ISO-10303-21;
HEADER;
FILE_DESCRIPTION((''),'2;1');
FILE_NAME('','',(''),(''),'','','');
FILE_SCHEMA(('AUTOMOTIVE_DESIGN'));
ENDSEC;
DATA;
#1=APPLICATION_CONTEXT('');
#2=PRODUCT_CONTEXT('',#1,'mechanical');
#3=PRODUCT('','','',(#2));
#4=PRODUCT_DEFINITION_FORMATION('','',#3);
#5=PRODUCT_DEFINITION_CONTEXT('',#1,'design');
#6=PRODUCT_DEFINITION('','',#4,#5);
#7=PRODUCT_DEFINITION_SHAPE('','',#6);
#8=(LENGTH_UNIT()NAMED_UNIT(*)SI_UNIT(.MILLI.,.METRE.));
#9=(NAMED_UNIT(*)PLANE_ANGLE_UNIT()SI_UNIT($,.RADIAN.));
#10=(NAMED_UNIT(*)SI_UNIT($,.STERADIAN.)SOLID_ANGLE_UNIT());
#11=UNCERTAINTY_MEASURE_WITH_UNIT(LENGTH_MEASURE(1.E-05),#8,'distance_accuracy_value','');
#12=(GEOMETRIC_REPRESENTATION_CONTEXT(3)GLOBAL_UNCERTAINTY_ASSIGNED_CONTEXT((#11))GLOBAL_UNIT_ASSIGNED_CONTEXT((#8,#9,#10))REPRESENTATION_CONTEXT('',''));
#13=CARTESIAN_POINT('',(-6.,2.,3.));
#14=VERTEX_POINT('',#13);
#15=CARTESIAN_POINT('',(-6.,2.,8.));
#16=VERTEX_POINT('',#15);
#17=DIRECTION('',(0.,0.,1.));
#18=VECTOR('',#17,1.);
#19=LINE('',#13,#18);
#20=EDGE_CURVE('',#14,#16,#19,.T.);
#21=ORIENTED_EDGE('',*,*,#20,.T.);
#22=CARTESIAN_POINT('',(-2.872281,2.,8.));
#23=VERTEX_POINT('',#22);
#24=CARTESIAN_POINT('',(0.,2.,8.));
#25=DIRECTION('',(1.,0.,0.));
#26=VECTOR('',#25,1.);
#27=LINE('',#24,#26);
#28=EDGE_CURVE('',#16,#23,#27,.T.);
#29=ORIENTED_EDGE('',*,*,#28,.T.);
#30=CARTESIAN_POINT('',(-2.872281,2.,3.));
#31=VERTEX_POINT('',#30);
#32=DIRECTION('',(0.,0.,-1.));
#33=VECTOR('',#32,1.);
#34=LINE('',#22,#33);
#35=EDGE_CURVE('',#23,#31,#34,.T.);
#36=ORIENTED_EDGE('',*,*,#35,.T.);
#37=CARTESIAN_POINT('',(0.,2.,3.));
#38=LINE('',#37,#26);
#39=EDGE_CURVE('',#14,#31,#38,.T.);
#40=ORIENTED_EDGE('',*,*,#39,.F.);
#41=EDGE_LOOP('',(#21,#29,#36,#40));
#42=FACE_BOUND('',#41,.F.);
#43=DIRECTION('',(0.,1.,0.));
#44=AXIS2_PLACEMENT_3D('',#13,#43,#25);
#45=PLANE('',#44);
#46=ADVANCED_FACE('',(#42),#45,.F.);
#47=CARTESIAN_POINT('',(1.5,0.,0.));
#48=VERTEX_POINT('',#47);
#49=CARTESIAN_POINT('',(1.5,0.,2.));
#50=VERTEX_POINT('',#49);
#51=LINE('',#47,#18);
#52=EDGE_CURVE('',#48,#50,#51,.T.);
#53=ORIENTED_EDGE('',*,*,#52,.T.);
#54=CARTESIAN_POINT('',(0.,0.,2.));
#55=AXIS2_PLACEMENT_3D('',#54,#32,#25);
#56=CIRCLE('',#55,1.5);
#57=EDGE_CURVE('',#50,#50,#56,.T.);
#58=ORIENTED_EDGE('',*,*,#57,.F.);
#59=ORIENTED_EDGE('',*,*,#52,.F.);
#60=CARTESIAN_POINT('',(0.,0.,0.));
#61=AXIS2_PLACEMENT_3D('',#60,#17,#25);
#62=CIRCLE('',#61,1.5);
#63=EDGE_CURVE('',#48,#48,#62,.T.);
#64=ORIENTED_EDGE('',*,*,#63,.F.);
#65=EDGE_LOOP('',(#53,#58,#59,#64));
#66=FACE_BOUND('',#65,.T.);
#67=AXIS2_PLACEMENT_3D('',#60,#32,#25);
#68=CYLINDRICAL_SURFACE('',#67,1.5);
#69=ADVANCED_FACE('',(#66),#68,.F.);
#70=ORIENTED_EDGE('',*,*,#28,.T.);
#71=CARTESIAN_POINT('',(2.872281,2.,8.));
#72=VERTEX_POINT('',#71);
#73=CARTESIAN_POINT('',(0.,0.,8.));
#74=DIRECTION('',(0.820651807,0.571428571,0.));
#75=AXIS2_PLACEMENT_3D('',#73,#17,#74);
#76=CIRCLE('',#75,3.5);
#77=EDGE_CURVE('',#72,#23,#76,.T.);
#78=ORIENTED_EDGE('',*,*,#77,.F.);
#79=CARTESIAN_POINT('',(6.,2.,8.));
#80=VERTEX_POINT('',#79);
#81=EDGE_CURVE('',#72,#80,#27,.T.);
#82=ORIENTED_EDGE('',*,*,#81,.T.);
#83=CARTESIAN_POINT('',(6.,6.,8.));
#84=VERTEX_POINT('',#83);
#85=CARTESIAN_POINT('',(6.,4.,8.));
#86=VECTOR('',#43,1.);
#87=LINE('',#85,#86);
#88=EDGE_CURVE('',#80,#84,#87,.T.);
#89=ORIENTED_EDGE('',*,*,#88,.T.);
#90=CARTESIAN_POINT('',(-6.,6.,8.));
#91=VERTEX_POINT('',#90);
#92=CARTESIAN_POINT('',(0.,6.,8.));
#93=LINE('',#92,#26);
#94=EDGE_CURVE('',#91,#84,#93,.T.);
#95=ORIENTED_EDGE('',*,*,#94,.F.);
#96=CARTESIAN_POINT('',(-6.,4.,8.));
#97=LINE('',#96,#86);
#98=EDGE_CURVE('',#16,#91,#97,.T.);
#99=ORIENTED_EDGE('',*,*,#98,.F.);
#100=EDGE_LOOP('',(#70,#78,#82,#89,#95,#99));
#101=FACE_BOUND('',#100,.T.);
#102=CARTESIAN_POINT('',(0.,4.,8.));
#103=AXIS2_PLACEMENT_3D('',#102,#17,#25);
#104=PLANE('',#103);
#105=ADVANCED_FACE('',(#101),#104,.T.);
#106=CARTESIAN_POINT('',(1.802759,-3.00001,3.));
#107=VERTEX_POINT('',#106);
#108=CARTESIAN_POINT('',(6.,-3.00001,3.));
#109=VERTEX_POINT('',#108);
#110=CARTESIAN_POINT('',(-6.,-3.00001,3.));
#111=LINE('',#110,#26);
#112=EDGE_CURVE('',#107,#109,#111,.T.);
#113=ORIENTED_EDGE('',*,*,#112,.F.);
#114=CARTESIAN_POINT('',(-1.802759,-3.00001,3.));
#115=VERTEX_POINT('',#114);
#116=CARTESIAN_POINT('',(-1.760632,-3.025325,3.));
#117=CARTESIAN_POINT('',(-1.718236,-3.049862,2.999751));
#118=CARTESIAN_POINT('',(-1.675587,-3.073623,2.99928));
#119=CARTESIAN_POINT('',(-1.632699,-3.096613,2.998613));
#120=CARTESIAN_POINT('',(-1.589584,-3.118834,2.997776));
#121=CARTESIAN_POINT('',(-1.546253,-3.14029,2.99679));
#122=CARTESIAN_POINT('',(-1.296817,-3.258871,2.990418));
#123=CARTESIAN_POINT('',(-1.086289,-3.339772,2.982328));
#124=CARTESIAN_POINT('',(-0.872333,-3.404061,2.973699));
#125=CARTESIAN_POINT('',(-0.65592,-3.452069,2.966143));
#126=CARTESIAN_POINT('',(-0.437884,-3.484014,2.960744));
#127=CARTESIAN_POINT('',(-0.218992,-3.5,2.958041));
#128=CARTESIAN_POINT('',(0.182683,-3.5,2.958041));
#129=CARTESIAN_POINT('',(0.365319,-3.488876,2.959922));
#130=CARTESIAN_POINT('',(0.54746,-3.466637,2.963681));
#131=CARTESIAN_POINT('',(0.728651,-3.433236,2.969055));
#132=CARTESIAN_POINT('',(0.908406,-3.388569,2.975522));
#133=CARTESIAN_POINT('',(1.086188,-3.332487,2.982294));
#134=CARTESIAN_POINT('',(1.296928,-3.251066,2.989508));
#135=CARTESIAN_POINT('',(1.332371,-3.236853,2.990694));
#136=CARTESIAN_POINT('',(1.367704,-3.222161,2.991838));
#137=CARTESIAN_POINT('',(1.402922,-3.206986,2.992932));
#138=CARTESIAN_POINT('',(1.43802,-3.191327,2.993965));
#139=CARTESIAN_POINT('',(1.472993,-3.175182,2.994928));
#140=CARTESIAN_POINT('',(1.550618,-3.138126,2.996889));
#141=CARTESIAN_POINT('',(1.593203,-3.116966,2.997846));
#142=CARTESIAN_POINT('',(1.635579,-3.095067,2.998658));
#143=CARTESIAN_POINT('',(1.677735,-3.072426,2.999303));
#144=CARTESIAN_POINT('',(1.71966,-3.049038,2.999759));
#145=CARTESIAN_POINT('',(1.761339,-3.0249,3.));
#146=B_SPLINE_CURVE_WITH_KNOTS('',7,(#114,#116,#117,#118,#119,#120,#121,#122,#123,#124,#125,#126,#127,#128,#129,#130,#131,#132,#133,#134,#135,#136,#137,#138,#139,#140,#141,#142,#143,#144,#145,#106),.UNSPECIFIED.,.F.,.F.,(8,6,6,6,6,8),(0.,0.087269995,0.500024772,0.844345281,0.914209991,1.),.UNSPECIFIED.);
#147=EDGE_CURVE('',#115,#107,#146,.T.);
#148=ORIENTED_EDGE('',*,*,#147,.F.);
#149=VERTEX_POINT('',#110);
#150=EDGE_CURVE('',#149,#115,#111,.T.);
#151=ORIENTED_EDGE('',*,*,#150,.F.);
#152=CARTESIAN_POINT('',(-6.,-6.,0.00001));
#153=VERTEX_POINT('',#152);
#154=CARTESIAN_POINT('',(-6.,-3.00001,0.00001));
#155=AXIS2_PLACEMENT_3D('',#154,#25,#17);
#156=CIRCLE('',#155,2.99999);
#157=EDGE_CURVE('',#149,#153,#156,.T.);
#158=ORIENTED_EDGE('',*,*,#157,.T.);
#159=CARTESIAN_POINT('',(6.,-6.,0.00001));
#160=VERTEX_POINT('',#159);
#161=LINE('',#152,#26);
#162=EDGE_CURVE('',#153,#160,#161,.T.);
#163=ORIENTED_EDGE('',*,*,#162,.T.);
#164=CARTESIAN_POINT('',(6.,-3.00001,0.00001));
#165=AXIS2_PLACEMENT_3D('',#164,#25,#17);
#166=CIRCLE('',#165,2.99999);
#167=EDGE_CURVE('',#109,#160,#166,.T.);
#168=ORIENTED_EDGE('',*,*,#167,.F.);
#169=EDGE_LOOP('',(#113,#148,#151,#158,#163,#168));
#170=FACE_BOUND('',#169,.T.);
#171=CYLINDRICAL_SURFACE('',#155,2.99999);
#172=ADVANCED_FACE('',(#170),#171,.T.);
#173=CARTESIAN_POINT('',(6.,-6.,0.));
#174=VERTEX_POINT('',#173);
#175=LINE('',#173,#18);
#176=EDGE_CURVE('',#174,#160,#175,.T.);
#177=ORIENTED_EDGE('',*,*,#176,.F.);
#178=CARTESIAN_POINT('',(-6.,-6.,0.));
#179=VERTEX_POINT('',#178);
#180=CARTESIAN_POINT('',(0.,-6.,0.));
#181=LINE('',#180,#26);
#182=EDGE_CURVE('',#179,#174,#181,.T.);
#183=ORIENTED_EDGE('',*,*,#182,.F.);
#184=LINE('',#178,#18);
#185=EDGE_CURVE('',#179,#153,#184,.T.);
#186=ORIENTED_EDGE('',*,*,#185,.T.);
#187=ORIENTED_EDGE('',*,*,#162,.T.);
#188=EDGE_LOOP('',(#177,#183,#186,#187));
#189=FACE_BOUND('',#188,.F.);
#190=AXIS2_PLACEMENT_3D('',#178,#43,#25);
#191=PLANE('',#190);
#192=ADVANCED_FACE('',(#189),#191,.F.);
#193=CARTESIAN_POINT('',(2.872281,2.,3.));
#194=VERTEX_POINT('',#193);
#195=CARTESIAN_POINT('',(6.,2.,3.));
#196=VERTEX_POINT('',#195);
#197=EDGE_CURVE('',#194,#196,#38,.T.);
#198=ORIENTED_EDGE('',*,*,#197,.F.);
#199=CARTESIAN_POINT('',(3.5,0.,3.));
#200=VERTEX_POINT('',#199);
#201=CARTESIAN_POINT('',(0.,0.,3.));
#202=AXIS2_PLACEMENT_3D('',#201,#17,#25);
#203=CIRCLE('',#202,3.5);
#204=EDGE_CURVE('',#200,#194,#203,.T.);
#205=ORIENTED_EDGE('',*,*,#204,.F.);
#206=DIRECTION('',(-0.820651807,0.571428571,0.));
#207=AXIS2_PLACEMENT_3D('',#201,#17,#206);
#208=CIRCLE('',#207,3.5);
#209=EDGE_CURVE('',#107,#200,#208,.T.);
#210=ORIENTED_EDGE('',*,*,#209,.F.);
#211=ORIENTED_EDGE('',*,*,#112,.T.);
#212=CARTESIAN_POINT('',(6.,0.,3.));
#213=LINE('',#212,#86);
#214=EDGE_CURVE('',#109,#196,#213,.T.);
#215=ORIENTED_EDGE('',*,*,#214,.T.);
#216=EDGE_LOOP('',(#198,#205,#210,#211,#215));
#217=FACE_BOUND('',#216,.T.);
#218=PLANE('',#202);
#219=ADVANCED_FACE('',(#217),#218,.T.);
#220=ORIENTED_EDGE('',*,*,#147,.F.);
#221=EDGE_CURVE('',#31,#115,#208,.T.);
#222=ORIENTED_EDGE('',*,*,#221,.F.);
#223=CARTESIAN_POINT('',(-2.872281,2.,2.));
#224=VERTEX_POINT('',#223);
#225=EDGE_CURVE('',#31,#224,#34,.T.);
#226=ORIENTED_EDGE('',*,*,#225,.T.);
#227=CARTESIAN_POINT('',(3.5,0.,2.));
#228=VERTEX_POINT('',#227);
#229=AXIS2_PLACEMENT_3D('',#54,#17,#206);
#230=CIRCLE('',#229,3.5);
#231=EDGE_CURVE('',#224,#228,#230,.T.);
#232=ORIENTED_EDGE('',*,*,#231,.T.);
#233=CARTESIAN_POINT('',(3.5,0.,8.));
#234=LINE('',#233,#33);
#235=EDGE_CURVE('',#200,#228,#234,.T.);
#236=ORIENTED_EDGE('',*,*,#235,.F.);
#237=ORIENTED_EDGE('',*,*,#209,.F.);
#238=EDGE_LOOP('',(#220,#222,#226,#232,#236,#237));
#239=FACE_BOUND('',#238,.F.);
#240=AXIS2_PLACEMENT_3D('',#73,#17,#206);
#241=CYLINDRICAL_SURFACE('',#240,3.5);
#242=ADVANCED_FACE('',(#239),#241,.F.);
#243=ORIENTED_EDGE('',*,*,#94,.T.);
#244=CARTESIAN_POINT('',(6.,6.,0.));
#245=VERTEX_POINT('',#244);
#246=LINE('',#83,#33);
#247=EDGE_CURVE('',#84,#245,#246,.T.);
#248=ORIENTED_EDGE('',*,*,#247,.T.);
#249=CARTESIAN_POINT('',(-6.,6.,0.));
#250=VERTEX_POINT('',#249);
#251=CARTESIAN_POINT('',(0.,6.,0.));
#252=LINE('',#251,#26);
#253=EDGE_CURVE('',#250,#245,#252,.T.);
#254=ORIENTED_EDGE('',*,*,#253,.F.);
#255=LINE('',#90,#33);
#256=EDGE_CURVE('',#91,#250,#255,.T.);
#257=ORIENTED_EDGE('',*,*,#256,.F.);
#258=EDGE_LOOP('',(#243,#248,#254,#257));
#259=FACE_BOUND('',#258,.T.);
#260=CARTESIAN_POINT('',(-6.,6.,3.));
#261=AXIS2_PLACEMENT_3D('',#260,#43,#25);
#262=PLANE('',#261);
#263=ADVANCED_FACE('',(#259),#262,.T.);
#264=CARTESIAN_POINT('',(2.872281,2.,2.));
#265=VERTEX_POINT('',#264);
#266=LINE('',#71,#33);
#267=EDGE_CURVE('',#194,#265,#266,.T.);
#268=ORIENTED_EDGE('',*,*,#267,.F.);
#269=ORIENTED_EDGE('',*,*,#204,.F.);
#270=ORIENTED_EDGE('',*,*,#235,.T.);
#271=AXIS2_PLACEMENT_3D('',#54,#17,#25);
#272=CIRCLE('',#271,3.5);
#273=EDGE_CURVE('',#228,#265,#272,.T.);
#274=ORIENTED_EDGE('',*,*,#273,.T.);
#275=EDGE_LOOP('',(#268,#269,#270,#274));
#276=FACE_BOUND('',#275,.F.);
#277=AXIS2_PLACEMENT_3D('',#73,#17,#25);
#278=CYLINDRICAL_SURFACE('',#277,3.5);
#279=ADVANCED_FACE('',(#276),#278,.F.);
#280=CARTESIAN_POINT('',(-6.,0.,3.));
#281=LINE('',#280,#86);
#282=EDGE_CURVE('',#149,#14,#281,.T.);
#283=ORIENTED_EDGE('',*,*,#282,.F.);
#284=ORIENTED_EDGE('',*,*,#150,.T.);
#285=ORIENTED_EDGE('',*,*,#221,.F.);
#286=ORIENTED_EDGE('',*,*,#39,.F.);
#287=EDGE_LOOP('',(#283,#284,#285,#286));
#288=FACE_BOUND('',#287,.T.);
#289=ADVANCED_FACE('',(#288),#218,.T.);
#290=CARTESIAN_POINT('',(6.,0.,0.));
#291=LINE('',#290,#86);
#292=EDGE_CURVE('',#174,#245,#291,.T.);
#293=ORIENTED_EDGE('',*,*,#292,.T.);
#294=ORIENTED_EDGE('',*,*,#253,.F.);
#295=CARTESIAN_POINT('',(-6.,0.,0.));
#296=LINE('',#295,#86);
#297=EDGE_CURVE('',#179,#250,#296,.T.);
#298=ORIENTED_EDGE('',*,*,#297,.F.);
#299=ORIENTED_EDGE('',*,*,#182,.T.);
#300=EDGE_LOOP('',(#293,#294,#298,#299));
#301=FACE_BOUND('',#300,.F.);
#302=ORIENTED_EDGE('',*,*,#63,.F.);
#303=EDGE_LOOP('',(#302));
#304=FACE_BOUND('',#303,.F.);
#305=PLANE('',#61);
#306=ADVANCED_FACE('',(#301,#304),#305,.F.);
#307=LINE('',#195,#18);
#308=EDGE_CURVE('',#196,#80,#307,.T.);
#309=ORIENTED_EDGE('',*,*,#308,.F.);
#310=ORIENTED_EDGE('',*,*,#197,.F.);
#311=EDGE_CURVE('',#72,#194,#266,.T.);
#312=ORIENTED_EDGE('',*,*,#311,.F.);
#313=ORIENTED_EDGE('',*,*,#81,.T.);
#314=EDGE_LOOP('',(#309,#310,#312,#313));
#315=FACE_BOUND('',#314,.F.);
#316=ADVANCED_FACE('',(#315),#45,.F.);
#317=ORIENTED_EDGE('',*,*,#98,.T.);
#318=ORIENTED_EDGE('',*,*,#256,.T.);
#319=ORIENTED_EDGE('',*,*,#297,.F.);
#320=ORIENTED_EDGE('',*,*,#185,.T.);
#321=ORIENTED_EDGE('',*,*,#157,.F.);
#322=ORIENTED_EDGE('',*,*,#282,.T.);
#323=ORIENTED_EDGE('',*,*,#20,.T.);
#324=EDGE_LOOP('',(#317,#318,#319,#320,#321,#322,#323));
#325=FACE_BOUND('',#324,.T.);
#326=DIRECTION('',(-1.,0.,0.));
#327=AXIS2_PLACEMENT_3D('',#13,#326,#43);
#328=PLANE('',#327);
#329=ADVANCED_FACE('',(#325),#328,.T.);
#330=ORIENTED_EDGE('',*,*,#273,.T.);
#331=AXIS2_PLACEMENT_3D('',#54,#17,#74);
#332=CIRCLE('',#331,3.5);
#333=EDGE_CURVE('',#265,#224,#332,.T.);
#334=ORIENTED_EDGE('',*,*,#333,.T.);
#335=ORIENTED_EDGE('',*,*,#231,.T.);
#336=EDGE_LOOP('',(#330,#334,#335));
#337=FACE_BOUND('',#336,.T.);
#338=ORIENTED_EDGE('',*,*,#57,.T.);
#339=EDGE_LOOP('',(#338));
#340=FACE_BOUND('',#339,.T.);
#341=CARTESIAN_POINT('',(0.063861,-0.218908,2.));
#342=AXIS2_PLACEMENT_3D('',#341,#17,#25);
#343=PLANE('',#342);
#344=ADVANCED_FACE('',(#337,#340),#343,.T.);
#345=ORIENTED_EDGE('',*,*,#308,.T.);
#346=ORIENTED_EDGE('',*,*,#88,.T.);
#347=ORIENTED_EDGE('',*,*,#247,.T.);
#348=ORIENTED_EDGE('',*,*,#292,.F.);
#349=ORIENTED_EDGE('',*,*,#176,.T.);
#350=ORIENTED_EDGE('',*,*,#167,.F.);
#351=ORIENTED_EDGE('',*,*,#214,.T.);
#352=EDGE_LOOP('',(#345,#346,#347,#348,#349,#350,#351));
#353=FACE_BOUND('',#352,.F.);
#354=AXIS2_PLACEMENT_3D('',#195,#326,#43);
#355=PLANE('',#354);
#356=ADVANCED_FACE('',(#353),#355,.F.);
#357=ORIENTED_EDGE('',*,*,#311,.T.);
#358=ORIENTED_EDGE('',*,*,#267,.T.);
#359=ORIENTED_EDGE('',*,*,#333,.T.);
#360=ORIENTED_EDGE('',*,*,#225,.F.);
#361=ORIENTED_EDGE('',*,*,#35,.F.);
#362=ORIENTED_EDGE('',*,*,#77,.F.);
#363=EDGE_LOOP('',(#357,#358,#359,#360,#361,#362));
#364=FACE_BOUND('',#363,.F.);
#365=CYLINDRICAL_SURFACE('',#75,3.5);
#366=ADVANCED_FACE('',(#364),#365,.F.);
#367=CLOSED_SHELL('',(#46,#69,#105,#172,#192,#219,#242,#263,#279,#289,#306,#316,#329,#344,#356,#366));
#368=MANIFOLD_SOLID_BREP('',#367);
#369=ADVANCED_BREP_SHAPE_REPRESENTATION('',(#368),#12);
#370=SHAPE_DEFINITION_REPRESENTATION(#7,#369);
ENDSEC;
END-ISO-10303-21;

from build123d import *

# Parameters (mm, degrees)
F0_W     = 12
F0_H     = 12
F0_R     = 1.5
F1_DEPTH = 3
F2_W     = 12
F2_H     = 4
F3_DEPTH = 5
F5_R     = 2.99999
F6_DEPTH = 6


# Not quite as in the source:
# - a fillet or chamfer is up to 0.001 mm smaller than in the source, because OpenCascade refuses the exact size


with BuildPart() as f1:
    # F0 (on Top) → F1 (new body)
    with BuildSketch(Plane.XY):
        Rectangle(F0_W, F0_H)
        Circle(F0_R, mode=Mode.SUBTRACT)
    extrude(amount=F1_DEPTH)

    # F2 (on face) → F3 (join)
    with BuildSketch(Plane.XY.offset(3)):
        with Locations((0, 4)):
            Rectangle(F2_W, F2_H)
    extrude(amount=F3_DEPTH)

    # F5 (radius 3 in the source; OpenCascade refuses exactly that, so slightly less here)
    f5_edges = [f1.edges().sort_by_distance(p)[0] for p in [
        (0, -6, 3),
    ]]
    fillet(f5_edges, radius=F5_R)

    # F4 (on face) → F6 (cut)
    with BuildSketch(Plane.XY.offset(8)):
        with BuildLine():
            ThreePointArc((-2.8722813233, 2), (-1.0480971731, -3.3393850206), (3.5, 0))
            ThreePointArc((3.5, 0), (3.3393850206, 1.0480971731), (2.8722813233, 2))
            Line((2.8722813233, 2), (-2.8722813233, 2))
        make_face()
        with BuildLine():
            Line((-2.8722813233, 2), (2.8722813233, 2))
            ThreePointArc((2.8722813233, 2), (0, 3.5), (-2.8722813233, 2))
        make_face()
    extrude(amount=-F6_DEPTH, mode=Mode.SUBTRACT)


solid = f1.part
